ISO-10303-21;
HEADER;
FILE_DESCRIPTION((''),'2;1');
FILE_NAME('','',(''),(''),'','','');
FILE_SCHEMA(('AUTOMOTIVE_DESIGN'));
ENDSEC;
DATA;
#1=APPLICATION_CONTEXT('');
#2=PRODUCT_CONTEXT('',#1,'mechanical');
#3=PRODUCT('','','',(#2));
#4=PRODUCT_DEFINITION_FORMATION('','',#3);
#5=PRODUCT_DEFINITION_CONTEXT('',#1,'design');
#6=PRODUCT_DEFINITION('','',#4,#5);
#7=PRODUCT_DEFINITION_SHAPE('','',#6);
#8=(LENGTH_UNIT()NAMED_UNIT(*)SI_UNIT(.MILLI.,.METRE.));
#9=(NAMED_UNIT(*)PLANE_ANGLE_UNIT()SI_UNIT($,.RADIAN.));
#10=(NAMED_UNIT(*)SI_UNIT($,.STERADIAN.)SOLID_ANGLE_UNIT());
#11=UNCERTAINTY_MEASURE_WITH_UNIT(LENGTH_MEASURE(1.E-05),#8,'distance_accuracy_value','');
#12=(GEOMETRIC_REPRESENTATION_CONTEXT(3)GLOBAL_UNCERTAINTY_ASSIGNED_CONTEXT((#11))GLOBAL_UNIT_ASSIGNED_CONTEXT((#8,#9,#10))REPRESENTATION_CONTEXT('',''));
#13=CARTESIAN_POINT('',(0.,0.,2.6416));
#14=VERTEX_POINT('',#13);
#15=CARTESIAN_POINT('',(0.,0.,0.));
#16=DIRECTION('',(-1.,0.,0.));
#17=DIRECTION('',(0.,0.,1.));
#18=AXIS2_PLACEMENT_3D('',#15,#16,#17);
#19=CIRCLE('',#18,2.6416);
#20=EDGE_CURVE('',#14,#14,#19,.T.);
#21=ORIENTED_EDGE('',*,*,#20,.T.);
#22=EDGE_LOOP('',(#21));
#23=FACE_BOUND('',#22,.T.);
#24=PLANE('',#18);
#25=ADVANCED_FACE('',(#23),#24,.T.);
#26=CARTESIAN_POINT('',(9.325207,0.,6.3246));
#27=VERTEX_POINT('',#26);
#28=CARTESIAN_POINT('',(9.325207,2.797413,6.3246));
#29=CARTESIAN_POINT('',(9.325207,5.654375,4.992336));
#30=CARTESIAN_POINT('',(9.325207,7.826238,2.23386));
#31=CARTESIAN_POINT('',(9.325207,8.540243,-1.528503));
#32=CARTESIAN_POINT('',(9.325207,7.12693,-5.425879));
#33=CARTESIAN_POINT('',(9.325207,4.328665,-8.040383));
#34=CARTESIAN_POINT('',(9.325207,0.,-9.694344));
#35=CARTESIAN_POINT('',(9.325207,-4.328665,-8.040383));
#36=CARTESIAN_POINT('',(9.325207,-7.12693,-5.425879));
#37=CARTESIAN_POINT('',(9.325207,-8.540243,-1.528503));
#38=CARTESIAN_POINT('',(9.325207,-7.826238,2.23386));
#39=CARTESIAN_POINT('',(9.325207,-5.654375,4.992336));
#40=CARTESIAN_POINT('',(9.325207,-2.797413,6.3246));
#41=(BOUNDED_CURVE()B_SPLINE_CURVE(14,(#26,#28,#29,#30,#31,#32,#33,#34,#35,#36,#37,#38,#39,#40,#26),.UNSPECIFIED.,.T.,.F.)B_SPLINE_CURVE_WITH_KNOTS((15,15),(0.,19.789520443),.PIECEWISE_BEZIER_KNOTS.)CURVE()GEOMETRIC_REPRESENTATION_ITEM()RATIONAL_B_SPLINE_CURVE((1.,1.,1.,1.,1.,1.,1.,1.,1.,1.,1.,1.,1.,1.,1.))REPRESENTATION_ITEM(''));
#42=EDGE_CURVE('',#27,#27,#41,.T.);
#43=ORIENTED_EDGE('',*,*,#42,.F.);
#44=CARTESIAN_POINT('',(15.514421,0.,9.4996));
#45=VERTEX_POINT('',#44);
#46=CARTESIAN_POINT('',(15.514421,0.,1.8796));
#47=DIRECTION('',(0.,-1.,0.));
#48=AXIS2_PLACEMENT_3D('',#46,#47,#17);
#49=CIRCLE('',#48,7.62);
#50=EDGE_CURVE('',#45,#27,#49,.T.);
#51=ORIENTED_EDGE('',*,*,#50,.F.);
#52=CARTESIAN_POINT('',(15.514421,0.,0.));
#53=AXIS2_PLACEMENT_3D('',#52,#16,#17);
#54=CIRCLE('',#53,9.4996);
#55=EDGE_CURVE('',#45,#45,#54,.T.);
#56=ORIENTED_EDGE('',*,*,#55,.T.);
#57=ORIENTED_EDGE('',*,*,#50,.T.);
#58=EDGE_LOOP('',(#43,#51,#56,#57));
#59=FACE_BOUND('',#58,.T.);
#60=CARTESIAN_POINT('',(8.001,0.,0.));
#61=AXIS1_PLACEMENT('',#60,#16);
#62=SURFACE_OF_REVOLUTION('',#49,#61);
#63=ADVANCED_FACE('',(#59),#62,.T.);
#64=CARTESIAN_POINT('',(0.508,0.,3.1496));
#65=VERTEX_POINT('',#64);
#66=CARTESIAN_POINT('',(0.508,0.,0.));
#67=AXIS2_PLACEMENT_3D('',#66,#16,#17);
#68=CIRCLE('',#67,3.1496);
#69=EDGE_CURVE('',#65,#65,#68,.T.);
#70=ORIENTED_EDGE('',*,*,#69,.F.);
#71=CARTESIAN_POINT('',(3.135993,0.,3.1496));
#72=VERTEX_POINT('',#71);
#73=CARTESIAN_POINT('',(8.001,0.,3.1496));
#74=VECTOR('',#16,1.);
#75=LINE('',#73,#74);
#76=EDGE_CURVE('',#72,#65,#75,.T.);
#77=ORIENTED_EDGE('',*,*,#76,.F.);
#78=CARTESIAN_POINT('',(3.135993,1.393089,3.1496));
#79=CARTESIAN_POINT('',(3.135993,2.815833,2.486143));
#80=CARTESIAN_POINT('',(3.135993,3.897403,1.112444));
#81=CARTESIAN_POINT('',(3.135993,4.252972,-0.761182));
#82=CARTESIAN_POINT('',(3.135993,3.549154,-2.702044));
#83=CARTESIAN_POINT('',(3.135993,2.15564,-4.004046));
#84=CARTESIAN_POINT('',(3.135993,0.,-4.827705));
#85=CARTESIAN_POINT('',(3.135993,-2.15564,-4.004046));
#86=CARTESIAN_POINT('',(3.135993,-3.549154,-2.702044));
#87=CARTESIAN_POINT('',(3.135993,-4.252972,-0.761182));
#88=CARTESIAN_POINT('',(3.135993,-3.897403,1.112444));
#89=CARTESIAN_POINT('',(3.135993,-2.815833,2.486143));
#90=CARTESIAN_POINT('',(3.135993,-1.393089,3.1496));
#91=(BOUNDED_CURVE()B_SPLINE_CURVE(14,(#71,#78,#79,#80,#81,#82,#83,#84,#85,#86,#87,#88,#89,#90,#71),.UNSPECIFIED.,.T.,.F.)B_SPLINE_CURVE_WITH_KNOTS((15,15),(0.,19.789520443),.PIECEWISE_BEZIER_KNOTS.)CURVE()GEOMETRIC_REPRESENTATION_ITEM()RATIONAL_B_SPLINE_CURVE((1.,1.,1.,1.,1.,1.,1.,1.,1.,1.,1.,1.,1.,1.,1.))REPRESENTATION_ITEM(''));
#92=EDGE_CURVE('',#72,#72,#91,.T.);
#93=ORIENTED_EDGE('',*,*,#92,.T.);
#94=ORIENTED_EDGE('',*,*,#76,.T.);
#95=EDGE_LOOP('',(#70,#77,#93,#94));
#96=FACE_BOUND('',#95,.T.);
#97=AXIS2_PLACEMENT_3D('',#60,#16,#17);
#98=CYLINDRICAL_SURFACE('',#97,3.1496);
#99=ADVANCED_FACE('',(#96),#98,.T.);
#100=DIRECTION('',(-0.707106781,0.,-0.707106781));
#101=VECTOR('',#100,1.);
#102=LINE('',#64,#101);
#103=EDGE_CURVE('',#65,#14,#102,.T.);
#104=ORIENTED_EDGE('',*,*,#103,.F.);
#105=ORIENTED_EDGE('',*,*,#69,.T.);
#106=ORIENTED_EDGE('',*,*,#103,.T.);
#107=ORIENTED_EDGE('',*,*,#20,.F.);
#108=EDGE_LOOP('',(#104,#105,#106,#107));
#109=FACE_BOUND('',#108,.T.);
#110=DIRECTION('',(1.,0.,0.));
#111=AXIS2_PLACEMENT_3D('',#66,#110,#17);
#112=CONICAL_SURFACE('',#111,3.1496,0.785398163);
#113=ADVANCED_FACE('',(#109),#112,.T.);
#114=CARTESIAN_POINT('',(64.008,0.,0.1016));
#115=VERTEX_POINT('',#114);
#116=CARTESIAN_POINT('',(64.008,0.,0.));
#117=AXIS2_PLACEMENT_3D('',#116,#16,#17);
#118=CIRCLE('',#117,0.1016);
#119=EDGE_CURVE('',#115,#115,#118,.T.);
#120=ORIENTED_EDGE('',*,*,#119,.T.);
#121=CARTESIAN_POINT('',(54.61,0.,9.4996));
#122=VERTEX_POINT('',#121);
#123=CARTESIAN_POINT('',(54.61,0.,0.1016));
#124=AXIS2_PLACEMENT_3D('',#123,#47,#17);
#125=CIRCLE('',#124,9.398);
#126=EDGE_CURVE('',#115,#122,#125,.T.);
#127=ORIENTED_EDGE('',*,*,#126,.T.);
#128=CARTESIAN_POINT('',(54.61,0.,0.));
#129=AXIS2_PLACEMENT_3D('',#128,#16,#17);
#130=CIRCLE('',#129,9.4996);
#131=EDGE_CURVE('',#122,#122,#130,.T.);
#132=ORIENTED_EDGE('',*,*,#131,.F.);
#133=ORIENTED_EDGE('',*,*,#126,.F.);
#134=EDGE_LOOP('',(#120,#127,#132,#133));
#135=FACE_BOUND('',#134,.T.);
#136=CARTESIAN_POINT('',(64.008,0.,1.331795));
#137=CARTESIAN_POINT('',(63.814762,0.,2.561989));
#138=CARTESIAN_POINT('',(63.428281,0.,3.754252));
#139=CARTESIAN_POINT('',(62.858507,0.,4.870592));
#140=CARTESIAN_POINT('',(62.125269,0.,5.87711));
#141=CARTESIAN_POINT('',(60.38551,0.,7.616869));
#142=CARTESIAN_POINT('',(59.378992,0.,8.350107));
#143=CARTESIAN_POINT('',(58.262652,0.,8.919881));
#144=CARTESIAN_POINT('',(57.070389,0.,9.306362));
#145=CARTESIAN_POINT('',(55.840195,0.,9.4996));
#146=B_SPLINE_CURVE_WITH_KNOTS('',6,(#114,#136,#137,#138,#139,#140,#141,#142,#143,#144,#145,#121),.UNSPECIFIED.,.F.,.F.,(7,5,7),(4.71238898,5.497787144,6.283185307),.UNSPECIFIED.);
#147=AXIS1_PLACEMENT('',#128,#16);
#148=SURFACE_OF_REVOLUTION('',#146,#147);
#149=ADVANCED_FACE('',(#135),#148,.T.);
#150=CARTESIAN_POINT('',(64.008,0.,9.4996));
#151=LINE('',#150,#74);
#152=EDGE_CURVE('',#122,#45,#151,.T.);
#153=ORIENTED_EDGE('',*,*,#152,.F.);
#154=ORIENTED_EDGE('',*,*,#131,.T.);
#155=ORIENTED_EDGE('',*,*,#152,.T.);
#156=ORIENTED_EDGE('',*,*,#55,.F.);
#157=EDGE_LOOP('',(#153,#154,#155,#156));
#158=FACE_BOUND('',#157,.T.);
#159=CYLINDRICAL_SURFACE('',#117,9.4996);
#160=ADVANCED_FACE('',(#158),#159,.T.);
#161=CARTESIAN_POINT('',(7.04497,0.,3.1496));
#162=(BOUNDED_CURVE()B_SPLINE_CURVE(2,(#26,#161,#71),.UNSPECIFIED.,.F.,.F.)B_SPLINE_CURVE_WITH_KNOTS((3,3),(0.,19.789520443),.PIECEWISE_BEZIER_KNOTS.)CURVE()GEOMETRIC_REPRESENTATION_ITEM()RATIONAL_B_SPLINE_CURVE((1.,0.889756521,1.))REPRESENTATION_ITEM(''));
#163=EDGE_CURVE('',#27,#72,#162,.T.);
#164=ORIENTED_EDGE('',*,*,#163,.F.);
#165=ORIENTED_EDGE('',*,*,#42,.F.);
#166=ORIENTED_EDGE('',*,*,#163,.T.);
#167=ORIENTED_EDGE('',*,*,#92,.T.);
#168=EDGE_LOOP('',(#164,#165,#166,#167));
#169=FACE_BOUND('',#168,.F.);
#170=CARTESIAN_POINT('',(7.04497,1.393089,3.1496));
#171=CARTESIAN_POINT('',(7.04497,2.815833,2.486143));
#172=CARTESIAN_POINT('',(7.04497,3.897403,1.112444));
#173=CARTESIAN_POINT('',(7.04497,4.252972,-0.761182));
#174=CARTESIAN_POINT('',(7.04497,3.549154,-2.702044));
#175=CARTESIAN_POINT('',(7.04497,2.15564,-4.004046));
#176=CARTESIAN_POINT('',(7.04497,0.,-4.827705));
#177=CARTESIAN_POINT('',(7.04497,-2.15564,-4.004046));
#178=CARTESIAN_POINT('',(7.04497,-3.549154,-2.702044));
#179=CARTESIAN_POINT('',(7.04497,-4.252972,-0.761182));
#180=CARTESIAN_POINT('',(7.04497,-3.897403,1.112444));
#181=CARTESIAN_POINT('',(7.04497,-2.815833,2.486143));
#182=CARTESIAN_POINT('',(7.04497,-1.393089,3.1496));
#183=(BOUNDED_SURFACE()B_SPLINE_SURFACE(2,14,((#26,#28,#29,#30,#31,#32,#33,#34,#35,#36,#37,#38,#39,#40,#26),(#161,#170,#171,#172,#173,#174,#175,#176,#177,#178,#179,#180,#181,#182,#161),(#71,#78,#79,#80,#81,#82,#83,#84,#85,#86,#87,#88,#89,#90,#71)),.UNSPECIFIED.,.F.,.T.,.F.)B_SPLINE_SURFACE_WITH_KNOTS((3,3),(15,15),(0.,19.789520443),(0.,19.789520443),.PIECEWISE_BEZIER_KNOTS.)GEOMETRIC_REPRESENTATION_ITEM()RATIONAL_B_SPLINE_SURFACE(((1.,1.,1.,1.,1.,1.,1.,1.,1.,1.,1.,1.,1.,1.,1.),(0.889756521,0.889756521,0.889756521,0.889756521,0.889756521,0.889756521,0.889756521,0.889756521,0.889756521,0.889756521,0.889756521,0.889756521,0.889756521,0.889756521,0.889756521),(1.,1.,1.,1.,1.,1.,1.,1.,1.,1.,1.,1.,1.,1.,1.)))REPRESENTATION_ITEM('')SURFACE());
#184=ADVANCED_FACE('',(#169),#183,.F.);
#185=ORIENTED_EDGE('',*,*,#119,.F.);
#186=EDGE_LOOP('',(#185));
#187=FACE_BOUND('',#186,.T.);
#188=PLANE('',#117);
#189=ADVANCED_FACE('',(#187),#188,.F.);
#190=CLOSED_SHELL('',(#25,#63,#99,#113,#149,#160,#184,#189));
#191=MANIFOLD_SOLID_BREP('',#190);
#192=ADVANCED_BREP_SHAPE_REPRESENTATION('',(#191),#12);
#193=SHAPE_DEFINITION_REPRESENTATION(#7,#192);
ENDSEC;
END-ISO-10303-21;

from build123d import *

# Parameters (mm, degrees)
F2_R    = 9.398
F4_R    = 7.62
F5_SIZE = 0.508


# Not quite as in the source:
# - a fillet or chamfer that OpenCascade refuses, or shapes differently, is made with other operations: its cross-section is extruded or revolved along the edge and cut away or added


with BuildPart() as f1:
    # F0 (on Front) → F1 (revolve)
    with BuildSketch(Plane.XZ):
        Polygon((0, 3.1496), (0, 0), (64.008, 0), (64.008, 9.4996), (8.001, 9.4996), (8.001, 3.1496), align=None)
    revolve(axis=Axis((-4.5283841901, 0, 0), (-1, 0, 0)))

    # F2
    f2_edges = [f1.edges().sort_by_distance(p)[0] for p in [
        (64.008, 0, -9.4996),
    ]]
    fillet(f2_edges, radius=F2_R)

    # F3: fillet of radius 7.62 on 1 edges, made by hand

    # F3_s1 → F3_t2 (revolve, cut)
    with BuildSketch(Plane.XZ):
        with BuildLine():
            ThreePointArc((15.5144213245, 9.4996), (10.5957324749, 7.6994711326), (8.001, 3.1496))
            Line((8.001, 3.1496), (8.001, 9.4996))
            Line((8.001, 9.4996), (15.5144213245, 9.4996))
        make_face()
    revolve(axis=Axis((8.001, 0, 0), (-1, 0, 0)), mode=Mode.SUBTRACT)

    # F4
    f4_edges = [f1.edges().sort_by_distance(p)[0] for p in [
        (8.001, 0, -3.1496),
    ]]
    fillet(f4_edges, radius=F4_R)

    # F5
    f5_edges = [f1.edges().sort_by_distance(p)[0] for p in [
        (0, 0, -3.1496),
    ]]
    chamfer(f5_edges, length=F5_SIZE)


solid = f1.part
